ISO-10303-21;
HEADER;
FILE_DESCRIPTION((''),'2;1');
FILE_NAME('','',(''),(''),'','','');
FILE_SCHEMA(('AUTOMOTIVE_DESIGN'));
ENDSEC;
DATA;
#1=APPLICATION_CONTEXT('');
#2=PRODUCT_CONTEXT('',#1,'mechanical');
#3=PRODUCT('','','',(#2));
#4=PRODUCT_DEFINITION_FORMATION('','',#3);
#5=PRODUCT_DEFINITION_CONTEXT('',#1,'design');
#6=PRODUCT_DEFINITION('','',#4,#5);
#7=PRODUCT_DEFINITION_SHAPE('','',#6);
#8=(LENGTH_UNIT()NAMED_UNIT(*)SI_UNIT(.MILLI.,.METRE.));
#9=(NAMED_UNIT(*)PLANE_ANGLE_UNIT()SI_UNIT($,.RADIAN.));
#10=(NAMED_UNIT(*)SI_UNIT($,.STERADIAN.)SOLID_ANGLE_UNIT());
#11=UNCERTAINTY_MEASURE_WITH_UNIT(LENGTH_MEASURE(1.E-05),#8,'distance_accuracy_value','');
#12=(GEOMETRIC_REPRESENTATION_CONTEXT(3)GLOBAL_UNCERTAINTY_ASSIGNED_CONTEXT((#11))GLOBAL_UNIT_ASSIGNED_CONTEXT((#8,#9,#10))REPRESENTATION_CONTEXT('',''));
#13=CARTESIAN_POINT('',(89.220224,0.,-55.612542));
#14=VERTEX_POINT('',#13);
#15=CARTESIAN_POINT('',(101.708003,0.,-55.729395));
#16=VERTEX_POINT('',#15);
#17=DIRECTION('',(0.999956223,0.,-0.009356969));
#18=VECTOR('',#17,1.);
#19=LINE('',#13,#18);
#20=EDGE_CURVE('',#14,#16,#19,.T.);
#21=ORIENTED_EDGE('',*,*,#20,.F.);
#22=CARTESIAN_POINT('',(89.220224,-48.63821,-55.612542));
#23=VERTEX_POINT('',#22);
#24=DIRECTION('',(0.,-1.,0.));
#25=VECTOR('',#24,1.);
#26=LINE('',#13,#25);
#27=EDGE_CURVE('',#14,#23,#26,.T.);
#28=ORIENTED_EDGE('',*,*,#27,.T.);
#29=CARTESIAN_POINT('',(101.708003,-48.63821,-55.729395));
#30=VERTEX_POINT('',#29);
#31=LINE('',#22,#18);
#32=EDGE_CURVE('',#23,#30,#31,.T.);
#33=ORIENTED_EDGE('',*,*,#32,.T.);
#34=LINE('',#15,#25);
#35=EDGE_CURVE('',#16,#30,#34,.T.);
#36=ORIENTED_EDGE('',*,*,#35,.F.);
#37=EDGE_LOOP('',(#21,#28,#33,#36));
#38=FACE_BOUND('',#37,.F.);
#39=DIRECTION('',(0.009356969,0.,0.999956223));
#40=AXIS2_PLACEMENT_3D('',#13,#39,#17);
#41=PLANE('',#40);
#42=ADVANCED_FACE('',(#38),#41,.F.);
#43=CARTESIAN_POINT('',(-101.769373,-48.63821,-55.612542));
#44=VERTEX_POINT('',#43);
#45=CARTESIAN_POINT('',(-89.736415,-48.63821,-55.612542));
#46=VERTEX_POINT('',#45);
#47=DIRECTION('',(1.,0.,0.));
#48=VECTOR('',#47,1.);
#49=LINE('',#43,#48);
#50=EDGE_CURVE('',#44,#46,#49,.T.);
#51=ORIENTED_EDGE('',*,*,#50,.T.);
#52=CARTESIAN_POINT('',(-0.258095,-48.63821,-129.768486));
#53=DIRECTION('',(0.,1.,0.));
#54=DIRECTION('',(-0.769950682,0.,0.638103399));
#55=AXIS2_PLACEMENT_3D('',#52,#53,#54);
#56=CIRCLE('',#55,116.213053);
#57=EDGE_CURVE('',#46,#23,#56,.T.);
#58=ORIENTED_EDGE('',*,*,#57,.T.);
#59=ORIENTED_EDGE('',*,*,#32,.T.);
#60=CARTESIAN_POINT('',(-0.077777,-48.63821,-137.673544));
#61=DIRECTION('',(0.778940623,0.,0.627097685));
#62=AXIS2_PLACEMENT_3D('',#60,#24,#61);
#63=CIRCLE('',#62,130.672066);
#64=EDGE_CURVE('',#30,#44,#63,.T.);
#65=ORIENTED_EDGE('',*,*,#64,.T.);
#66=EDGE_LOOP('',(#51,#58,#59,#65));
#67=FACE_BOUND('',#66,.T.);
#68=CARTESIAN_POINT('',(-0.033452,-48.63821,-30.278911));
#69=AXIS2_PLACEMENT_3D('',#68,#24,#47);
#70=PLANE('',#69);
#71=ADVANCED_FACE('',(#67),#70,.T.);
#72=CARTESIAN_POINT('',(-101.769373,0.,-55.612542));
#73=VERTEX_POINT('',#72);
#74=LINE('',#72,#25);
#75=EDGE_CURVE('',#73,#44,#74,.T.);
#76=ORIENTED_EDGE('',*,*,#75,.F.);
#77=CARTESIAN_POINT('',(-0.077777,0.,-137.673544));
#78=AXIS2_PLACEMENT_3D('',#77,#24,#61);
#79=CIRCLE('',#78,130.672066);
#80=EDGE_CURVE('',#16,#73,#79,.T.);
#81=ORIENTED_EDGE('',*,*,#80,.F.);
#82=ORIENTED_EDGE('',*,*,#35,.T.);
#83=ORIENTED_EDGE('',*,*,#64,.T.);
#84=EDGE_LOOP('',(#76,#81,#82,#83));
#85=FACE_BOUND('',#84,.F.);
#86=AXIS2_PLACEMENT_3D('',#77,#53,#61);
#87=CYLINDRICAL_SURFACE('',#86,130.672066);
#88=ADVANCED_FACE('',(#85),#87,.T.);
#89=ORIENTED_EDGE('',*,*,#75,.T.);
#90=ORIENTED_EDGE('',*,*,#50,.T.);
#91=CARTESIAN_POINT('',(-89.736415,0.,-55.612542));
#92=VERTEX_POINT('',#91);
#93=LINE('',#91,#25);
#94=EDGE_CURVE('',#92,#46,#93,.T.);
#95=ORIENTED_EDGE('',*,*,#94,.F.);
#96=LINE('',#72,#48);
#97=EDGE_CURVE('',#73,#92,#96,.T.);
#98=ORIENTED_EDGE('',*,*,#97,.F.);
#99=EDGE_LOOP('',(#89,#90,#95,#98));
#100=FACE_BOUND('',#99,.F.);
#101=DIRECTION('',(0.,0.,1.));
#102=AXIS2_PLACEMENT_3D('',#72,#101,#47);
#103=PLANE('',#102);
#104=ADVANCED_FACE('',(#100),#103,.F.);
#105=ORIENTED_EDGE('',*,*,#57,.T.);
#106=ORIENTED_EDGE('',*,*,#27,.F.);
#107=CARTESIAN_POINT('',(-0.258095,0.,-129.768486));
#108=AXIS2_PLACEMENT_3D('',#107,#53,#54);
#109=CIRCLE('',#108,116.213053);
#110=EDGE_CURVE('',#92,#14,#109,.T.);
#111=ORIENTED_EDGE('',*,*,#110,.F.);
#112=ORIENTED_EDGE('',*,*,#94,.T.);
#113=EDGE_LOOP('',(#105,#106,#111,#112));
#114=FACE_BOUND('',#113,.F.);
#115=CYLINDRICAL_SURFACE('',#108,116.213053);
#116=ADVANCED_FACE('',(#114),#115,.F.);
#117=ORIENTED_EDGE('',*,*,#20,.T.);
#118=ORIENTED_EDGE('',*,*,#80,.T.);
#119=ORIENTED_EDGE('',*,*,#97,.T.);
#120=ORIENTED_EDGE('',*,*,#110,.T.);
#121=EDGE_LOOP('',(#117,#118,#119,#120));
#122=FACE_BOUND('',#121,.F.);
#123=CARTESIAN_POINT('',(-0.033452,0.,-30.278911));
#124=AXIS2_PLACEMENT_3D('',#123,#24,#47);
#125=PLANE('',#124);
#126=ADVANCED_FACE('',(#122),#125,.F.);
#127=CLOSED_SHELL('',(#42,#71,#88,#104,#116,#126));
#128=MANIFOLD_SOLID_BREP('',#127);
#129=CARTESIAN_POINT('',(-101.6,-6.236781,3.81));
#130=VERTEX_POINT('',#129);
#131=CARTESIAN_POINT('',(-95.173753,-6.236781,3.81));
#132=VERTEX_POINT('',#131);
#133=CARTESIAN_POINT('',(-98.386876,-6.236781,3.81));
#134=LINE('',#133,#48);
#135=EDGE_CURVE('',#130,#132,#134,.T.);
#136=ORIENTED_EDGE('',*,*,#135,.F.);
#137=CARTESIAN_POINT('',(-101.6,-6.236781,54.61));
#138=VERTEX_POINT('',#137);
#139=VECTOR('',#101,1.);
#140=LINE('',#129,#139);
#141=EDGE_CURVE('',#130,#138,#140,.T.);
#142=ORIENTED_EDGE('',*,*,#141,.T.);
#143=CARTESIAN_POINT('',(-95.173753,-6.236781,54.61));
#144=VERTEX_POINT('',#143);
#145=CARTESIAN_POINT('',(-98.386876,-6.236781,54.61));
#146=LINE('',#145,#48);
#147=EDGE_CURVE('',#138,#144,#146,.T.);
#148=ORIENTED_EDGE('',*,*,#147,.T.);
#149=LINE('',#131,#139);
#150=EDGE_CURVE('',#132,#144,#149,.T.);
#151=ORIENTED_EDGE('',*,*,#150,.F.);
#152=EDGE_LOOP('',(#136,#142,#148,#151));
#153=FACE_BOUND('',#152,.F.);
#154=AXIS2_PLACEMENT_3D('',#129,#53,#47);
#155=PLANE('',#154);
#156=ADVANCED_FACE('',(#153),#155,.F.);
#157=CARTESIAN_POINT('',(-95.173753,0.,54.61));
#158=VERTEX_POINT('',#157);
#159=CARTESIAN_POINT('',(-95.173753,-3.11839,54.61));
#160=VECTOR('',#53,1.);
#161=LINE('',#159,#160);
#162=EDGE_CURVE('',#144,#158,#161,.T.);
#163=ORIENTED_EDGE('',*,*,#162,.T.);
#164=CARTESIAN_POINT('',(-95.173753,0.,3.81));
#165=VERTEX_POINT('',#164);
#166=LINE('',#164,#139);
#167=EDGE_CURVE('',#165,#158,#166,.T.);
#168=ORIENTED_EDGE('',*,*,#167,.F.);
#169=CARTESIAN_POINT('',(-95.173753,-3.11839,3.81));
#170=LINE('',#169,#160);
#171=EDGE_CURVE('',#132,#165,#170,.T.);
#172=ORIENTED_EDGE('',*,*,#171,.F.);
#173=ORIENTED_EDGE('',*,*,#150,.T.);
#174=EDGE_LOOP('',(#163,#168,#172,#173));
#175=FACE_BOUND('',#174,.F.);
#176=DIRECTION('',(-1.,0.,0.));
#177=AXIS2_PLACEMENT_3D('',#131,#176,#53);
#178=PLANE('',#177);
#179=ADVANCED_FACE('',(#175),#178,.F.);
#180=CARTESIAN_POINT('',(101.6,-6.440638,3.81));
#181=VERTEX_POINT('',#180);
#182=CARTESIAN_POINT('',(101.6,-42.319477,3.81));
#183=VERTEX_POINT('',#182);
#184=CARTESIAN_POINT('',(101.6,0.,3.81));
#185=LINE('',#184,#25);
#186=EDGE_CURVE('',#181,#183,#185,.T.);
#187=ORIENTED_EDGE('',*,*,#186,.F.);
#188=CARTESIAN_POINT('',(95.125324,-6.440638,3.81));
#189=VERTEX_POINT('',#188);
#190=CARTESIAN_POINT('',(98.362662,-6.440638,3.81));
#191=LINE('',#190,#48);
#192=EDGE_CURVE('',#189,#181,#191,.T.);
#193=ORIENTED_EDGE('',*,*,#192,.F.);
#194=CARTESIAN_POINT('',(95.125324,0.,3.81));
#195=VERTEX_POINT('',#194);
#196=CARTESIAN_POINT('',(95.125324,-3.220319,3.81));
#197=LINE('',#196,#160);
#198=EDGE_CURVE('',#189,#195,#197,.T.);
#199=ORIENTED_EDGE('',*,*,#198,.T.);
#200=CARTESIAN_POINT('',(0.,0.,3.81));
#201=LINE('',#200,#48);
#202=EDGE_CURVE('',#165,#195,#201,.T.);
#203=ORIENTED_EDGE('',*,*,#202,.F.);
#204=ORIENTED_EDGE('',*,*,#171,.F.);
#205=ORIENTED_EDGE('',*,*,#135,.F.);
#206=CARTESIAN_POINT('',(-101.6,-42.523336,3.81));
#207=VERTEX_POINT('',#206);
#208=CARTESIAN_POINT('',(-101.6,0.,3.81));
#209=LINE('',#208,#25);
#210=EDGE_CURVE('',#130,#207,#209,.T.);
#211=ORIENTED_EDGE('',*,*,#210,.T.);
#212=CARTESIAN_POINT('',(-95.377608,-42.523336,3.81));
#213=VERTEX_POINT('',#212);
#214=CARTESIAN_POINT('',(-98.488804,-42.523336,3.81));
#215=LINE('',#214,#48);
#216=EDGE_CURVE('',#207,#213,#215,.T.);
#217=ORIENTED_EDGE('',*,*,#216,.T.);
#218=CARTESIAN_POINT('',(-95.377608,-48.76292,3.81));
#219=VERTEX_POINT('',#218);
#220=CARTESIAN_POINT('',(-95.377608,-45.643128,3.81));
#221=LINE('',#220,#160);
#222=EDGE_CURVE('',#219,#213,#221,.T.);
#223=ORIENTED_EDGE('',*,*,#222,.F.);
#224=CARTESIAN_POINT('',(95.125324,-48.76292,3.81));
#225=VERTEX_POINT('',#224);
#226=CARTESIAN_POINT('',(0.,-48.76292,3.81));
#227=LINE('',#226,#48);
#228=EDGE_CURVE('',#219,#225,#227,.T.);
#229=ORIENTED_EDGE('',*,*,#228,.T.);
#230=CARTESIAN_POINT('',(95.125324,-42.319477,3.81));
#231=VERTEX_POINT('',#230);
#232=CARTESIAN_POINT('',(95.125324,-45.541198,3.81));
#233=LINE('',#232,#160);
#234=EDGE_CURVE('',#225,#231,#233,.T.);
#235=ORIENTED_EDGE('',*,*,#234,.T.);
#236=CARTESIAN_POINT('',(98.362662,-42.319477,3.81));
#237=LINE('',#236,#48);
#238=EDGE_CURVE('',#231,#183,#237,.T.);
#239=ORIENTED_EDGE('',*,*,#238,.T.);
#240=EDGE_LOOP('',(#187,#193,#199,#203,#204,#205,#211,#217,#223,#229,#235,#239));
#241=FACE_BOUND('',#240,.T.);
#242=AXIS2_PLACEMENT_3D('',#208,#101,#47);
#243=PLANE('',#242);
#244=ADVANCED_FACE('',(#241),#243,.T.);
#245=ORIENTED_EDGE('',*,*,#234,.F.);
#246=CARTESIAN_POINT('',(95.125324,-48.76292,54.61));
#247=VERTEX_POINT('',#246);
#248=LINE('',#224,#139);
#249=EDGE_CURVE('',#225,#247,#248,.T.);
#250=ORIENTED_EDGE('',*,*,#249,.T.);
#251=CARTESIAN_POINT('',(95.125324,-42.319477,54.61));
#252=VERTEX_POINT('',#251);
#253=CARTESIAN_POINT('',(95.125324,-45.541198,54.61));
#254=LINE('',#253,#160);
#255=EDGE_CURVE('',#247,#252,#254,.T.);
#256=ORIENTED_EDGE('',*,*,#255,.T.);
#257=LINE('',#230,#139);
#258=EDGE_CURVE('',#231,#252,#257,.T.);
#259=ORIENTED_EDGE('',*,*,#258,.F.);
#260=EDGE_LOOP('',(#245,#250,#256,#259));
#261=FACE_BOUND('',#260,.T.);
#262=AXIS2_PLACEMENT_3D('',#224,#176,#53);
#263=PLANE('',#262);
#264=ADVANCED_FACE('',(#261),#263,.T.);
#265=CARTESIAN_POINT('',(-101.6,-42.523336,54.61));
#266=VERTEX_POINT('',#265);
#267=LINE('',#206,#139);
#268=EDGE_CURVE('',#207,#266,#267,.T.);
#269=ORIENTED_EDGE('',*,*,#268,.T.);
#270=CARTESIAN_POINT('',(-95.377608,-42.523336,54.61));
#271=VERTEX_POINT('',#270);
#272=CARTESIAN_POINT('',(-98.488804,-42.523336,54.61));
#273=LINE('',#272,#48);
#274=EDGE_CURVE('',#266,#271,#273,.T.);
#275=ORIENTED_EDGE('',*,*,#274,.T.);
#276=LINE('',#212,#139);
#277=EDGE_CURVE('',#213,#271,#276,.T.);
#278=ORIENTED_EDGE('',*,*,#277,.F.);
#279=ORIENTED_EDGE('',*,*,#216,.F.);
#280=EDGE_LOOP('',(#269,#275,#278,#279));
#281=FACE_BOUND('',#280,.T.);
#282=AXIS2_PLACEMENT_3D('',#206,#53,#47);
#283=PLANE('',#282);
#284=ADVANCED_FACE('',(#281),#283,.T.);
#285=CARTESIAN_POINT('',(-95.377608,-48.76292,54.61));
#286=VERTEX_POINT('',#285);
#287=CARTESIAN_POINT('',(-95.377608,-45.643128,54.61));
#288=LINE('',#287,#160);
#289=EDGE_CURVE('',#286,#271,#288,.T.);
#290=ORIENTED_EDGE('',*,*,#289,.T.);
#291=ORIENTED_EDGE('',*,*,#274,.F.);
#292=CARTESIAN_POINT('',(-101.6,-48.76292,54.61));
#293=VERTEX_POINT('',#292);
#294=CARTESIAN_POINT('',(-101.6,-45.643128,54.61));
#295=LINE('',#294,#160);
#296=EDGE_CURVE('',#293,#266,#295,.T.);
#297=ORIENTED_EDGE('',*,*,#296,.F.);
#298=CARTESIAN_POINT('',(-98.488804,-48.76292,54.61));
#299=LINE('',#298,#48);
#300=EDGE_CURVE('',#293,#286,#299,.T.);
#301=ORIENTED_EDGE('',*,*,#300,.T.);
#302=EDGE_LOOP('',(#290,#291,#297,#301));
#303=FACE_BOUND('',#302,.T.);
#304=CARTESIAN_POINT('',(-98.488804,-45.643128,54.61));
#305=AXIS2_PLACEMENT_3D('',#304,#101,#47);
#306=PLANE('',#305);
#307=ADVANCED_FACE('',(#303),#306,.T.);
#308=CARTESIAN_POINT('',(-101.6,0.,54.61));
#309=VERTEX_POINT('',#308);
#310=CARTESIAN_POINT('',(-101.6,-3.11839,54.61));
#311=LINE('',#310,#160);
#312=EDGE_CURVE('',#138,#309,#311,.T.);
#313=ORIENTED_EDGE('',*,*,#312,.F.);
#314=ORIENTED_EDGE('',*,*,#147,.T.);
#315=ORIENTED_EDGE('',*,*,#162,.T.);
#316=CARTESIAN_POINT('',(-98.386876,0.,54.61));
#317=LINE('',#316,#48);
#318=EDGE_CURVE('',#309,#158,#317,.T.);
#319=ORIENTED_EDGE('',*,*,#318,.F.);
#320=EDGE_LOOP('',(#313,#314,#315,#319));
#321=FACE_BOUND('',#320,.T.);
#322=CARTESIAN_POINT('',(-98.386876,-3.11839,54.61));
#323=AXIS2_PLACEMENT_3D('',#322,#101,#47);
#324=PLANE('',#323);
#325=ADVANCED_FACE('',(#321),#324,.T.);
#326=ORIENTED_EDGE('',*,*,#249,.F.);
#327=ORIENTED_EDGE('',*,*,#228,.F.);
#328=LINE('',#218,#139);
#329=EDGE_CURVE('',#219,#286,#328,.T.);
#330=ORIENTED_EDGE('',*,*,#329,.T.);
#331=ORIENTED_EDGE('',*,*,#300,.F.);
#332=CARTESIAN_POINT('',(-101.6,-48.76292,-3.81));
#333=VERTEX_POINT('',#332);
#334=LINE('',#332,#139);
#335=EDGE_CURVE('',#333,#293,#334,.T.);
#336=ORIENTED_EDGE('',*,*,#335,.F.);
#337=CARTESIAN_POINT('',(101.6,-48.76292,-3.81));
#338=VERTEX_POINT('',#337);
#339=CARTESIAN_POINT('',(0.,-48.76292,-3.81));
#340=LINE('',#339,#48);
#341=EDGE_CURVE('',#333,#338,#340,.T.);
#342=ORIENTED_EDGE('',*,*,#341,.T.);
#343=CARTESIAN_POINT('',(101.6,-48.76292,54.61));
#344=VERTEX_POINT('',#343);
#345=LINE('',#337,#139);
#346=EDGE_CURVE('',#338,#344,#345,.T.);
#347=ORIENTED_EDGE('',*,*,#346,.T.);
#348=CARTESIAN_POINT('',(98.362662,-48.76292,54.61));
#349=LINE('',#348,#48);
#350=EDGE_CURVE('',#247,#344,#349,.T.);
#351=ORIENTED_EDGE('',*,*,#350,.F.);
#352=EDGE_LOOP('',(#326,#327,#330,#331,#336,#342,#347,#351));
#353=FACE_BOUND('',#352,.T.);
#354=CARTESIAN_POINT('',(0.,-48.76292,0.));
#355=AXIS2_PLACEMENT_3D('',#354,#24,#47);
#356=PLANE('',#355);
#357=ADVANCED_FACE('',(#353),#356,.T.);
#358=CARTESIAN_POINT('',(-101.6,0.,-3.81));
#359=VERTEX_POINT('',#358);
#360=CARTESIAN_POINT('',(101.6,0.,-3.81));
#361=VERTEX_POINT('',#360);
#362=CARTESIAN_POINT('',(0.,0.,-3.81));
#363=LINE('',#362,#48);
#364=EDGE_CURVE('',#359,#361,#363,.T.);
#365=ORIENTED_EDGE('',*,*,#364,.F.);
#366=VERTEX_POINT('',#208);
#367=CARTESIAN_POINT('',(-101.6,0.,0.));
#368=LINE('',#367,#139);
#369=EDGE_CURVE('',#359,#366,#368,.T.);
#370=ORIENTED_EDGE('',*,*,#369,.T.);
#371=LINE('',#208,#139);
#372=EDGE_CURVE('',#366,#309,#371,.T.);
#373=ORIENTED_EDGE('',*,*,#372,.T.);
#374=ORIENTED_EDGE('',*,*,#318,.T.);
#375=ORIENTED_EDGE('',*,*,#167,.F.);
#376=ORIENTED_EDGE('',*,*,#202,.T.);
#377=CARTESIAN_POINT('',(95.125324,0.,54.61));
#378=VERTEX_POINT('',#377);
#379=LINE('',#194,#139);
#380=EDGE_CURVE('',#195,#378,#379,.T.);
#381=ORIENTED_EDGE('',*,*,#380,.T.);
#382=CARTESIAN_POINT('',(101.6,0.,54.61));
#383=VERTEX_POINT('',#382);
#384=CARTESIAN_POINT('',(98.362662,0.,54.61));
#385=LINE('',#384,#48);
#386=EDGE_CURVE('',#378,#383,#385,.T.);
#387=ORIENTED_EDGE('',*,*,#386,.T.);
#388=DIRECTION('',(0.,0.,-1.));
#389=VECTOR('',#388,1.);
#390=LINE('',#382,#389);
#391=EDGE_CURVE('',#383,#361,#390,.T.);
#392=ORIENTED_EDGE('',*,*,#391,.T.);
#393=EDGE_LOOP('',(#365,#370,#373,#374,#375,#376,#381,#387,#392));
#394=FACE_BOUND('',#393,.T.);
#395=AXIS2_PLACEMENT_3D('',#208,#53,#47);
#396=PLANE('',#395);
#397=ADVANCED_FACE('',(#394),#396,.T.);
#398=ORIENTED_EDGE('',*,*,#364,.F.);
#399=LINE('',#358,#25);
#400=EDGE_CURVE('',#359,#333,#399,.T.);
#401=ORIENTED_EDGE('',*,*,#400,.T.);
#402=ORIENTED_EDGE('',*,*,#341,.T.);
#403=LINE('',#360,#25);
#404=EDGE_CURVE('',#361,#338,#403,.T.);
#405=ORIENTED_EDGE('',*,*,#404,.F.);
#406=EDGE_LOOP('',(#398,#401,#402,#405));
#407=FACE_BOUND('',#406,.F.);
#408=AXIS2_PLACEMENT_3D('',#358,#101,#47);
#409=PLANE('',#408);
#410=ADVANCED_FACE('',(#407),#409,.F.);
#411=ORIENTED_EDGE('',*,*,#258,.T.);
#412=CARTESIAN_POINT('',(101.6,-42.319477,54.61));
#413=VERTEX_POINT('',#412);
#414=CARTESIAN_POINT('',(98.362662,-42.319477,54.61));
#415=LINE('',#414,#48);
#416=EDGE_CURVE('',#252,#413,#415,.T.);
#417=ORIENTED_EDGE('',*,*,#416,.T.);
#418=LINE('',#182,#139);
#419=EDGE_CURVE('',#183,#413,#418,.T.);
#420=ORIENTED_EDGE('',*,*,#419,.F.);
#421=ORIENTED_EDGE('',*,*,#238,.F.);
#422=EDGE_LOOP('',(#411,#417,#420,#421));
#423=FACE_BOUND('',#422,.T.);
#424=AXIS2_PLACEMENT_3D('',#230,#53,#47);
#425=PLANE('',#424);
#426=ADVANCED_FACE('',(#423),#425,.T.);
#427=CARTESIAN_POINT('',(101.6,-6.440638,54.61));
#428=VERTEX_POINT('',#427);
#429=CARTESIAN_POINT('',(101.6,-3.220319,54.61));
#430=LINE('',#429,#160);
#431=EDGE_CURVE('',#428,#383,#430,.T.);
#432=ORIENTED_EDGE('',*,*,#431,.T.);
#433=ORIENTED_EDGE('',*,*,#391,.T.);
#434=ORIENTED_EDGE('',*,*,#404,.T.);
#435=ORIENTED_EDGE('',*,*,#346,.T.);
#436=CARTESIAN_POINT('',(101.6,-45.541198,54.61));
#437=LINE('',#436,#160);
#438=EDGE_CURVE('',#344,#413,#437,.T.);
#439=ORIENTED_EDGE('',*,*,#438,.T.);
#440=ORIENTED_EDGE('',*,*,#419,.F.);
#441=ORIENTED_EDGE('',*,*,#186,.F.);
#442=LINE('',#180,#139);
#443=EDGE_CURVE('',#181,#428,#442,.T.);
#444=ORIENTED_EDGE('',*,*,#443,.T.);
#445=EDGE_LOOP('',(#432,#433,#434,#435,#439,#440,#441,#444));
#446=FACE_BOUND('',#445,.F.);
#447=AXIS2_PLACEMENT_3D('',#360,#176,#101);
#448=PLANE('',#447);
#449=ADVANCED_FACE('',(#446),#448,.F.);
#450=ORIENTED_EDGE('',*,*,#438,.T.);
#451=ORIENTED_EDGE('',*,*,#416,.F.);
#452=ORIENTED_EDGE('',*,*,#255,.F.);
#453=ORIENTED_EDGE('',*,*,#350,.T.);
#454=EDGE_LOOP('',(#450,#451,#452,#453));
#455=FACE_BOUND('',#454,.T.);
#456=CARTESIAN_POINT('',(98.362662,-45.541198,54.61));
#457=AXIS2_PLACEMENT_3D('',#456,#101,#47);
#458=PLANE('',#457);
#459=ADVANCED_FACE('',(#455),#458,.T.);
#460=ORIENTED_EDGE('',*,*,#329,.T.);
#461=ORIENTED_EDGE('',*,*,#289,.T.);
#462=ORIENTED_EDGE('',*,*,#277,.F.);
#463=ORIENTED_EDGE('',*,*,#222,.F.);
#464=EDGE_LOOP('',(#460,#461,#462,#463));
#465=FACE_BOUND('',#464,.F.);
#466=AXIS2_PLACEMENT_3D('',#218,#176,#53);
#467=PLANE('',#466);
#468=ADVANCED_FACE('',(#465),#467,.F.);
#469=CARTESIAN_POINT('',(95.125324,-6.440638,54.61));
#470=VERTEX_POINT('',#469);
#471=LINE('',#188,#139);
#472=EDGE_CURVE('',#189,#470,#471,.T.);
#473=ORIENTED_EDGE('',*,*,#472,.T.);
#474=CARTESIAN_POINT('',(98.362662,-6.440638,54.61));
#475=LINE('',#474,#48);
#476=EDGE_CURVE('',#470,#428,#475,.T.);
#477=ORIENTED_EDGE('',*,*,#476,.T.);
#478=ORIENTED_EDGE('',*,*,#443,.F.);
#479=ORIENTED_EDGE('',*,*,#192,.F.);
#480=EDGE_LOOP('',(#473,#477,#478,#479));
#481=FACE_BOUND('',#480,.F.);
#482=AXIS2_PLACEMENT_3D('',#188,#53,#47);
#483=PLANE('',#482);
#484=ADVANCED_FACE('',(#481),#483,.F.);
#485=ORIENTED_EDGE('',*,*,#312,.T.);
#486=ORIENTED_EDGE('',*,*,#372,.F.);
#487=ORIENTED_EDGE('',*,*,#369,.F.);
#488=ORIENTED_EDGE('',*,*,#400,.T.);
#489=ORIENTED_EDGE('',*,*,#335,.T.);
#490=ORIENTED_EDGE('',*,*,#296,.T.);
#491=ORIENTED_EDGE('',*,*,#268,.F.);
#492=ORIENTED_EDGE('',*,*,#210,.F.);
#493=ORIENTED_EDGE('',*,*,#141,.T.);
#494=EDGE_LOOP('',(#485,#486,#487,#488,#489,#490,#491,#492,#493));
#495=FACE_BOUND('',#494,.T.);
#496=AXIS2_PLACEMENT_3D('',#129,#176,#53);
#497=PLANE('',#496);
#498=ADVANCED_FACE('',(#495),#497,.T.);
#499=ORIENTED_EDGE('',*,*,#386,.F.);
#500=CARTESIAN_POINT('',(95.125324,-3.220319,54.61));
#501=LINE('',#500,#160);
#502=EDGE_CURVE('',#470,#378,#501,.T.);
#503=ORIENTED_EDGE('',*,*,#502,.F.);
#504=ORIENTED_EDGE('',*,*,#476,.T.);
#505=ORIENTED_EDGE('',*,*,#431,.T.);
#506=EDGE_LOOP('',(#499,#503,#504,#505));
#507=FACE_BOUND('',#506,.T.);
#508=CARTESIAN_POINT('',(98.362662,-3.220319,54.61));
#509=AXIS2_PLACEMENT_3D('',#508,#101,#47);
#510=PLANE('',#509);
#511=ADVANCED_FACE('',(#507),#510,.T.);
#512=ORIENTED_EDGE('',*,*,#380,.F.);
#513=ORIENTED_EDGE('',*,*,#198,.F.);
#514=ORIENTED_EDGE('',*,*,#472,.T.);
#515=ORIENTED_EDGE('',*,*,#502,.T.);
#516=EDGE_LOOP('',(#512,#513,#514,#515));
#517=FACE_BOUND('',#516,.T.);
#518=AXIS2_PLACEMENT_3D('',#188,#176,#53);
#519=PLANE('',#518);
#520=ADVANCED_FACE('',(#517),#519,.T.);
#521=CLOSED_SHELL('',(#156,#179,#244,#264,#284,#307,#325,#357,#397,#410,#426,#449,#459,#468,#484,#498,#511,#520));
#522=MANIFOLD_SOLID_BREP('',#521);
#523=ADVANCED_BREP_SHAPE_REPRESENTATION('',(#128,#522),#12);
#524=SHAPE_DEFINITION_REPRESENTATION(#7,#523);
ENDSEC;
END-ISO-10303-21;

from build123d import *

# Parameters (mm, degrees)
F0_W     = 203.2
F0_H     = 7.62
F1_DEPTH = 48.76292
F2_W     = 6.4262472153
F2_H     = 6.2367809005
F2_W_2   = 6.2223918796
F2_H_2   = 6.2395843345
F2_W_3   = 6.4746759892
F2_H_3   = 6.4406376332
F2_H_4   = 6.4434433955
F3_DEPTH = 50.8
F5_DEPTH = 48.63821


# Not quite as in the source:
# - the program builds the solid bodies; features that only make, move or delete a surface that nothing else refers to are left out


with BuildPart() as f1:
    # F0 (on Front) → F1 (new body)
    with BuildSketch(Plane.XZ):
        Rectangle(F0_W, F0_H)
    extrude(amount=F1_DEPTH)

    # F2 (on face) → F3 (join)
    with BuildSketch(Plane.XY.offset(3.81)):
        with Locations((-98.3868763924, -3.1183904503)):
            Rectangle(F2_W, F2_H)
        with Locations((-98.4888040602, -45.6431278327)):
            Rectangle(F2_W_2, F2_H_2)
        with Locations((98.3626620054, -3.2203188166)):
            Rectangle(F2_W_3, F2_H_3)
        with Locations((98.3626620054, -45.5411983022)):
            Rectangle(F2_W_3, F2_H_4)
    extrude(amount=F3_DEPTH)


with BuildPart() as f5:
    # F4 (on Front) → F5 (new body)
    with BuildSketch(Plane.XZ):
        with BuildLine():
            Line((89.2202242982, -55.6125417352), (101.708002892, -55.7293946085))
            ThreePointArc((101.708002892, -55.7293946085), (-0.0027350897, -7.001500307), (-101.7693728209, -55.6125417352))
            Line((-101.7693728209, -55.6125417352), (-89.7364146949, -55.6125417352))
            ThreePointArc((-89.7364146949, -55.6125417352), (-0.2580951983, -13.5554328116), (89.2202242982, -55.6125417352))
        make_face()
    extrude(amount=F5_DEPTH)


solid = Compound([f1.part, f5.part])
